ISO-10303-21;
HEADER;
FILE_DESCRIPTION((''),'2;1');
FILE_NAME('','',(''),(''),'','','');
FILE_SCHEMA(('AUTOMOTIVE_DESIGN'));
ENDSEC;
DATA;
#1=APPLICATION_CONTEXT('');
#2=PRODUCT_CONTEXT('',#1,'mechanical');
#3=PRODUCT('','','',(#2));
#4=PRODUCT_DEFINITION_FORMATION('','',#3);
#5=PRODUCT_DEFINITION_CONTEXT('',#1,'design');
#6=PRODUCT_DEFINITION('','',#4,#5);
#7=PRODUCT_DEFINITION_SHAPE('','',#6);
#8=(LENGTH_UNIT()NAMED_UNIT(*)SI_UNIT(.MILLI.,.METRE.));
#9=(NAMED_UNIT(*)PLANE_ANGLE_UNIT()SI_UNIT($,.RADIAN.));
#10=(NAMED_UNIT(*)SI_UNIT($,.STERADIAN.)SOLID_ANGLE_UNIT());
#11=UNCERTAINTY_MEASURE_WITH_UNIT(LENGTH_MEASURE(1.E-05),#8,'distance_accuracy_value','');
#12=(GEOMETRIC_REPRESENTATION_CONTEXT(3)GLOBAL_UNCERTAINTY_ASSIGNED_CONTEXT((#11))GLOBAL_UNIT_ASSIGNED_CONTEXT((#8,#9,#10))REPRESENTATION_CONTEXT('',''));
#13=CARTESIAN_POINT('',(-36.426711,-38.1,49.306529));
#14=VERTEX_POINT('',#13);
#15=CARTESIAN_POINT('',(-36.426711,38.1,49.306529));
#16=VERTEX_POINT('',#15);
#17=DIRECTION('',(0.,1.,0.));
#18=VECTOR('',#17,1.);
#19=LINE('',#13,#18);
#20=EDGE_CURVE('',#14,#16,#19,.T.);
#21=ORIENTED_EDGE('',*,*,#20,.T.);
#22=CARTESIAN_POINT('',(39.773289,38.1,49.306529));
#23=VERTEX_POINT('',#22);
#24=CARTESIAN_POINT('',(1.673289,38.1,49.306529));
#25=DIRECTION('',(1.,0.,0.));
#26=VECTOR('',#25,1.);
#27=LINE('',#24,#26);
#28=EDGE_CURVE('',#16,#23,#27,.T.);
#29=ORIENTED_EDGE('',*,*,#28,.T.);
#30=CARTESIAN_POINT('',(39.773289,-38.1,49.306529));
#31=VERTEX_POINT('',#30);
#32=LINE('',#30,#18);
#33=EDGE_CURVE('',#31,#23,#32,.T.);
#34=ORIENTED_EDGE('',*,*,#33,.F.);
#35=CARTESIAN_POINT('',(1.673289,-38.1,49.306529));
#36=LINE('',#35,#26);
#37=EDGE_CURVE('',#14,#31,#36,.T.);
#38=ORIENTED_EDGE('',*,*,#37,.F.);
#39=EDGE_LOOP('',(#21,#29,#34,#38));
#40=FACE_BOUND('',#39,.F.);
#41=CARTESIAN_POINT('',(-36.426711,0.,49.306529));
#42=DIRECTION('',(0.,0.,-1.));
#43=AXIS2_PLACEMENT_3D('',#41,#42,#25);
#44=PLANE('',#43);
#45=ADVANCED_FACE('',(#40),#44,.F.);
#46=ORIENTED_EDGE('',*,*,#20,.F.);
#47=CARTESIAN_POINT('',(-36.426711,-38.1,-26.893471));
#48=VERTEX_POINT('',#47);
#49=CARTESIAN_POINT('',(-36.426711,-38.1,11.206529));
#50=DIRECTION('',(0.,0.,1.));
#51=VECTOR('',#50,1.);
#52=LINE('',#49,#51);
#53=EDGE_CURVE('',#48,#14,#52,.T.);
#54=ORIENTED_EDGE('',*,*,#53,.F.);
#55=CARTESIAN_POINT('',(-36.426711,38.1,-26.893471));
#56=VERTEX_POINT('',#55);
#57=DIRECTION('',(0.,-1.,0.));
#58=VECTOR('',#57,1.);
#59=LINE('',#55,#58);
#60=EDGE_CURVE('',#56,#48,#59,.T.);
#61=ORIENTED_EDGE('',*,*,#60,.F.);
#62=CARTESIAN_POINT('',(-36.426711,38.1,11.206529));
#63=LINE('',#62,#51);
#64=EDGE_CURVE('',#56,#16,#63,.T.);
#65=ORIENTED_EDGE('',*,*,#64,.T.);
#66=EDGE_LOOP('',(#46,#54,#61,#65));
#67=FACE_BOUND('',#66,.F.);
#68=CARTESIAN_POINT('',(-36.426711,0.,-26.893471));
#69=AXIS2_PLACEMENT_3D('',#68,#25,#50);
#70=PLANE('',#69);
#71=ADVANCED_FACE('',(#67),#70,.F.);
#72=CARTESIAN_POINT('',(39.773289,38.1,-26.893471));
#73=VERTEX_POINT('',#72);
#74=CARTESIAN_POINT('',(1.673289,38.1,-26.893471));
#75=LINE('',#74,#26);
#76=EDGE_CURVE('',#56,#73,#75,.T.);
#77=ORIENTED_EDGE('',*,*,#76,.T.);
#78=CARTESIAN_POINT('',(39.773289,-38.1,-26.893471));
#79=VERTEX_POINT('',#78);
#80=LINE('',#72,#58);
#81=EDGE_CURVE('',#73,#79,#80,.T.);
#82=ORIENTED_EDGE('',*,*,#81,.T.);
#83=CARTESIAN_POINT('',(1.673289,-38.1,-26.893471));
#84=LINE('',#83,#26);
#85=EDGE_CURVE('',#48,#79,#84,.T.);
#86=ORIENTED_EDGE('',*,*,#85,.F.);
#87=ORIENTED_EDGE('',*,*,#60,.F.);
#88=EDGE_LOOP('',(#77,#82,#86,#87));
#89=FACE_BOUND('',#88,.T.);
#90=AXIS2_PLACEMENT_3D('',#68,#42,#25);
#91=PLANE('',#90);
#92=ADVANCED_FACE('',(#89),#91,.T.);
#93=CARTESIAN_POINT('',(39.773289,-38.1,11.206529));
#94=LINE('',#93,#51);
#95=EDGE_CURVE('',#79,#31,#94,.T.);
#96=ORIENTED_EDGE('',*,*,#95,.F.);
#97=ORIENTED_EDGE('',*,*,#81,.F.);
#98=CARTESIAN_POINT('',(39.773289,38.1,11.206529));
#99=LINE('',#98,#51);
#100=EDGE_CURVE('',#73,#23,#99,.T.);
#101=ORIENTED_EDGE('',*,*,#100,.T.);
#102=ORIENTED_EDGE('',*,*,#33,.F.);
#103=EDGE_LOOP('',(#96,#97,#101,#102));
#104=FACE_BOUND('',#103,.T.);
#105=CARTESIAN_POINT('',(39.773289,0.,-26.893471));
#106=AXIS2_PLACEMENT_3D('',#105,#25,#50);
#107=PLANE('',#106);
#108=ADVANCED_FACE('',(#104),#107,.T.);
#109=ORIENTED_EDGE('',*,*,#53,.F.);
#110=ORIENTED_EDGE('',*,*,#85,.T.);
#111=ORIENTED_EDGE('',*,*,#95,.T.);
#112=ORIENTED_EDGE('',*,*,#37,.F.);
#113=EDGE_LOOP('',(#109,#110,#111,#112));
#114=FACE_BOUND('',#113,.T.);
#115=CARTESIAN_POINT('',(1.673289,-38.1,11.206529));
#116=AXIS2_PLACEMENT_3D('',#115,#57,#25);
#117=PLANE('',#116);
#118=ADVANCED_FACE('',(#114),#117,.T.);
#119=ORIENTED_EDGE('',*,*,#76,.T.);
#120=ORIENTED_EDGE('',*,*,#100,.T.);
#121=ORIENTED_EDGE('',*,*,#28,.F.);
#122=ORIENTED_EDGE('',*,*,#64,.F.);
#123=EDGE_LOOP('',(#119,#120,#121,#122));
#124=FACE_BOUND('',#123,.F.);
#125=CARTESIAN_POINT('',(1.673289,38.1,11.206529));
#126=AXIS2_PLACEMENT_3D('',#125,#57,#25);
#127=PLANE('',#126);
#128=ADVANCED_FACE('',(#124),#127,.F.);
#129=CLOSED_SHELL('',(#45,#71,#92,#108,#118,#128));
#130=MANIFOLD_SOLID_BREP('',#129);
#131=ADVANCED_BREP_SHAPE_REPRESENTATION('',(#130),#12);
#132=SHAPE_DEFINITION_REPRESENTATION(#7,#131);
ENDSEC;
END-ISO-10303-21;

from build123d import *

# Parameters (mm, degrees)
F0_W     = 76.2
F0_H     = 76.2
F1_DEPTH = 38.1
F2_R     = 33.855200569
F3_DEPTH = 172


# Not quite as in the source:
# - an extrude ends at something that could not be found from the text; its depth is read off the source's solid


with BuildPart() as f1:
    # F0 (on Front) → F1 (new body, symmetric)
    with BuildSketch(Plane.XZ):
        with Locations((1.6732892294, 11.20652853)):
            Rectangle(F0_W, F0_H)
    extrude(amount=F1_DEPTH, both=True)

    # F2 (on face) → F3 (cut, through all)
    with BuildSketch(Plane(origin=(-36.4267107706, 0, 0), x_dir=(0, -1, 0), z_dir=(-1, 0, 0))):
        with Locations((0, 14.9851664901)):
            Circle(F2_R)
    extrude(amount=F3_DEPTH, mode=Mode.SUBTRACT)


solid = f1.part
